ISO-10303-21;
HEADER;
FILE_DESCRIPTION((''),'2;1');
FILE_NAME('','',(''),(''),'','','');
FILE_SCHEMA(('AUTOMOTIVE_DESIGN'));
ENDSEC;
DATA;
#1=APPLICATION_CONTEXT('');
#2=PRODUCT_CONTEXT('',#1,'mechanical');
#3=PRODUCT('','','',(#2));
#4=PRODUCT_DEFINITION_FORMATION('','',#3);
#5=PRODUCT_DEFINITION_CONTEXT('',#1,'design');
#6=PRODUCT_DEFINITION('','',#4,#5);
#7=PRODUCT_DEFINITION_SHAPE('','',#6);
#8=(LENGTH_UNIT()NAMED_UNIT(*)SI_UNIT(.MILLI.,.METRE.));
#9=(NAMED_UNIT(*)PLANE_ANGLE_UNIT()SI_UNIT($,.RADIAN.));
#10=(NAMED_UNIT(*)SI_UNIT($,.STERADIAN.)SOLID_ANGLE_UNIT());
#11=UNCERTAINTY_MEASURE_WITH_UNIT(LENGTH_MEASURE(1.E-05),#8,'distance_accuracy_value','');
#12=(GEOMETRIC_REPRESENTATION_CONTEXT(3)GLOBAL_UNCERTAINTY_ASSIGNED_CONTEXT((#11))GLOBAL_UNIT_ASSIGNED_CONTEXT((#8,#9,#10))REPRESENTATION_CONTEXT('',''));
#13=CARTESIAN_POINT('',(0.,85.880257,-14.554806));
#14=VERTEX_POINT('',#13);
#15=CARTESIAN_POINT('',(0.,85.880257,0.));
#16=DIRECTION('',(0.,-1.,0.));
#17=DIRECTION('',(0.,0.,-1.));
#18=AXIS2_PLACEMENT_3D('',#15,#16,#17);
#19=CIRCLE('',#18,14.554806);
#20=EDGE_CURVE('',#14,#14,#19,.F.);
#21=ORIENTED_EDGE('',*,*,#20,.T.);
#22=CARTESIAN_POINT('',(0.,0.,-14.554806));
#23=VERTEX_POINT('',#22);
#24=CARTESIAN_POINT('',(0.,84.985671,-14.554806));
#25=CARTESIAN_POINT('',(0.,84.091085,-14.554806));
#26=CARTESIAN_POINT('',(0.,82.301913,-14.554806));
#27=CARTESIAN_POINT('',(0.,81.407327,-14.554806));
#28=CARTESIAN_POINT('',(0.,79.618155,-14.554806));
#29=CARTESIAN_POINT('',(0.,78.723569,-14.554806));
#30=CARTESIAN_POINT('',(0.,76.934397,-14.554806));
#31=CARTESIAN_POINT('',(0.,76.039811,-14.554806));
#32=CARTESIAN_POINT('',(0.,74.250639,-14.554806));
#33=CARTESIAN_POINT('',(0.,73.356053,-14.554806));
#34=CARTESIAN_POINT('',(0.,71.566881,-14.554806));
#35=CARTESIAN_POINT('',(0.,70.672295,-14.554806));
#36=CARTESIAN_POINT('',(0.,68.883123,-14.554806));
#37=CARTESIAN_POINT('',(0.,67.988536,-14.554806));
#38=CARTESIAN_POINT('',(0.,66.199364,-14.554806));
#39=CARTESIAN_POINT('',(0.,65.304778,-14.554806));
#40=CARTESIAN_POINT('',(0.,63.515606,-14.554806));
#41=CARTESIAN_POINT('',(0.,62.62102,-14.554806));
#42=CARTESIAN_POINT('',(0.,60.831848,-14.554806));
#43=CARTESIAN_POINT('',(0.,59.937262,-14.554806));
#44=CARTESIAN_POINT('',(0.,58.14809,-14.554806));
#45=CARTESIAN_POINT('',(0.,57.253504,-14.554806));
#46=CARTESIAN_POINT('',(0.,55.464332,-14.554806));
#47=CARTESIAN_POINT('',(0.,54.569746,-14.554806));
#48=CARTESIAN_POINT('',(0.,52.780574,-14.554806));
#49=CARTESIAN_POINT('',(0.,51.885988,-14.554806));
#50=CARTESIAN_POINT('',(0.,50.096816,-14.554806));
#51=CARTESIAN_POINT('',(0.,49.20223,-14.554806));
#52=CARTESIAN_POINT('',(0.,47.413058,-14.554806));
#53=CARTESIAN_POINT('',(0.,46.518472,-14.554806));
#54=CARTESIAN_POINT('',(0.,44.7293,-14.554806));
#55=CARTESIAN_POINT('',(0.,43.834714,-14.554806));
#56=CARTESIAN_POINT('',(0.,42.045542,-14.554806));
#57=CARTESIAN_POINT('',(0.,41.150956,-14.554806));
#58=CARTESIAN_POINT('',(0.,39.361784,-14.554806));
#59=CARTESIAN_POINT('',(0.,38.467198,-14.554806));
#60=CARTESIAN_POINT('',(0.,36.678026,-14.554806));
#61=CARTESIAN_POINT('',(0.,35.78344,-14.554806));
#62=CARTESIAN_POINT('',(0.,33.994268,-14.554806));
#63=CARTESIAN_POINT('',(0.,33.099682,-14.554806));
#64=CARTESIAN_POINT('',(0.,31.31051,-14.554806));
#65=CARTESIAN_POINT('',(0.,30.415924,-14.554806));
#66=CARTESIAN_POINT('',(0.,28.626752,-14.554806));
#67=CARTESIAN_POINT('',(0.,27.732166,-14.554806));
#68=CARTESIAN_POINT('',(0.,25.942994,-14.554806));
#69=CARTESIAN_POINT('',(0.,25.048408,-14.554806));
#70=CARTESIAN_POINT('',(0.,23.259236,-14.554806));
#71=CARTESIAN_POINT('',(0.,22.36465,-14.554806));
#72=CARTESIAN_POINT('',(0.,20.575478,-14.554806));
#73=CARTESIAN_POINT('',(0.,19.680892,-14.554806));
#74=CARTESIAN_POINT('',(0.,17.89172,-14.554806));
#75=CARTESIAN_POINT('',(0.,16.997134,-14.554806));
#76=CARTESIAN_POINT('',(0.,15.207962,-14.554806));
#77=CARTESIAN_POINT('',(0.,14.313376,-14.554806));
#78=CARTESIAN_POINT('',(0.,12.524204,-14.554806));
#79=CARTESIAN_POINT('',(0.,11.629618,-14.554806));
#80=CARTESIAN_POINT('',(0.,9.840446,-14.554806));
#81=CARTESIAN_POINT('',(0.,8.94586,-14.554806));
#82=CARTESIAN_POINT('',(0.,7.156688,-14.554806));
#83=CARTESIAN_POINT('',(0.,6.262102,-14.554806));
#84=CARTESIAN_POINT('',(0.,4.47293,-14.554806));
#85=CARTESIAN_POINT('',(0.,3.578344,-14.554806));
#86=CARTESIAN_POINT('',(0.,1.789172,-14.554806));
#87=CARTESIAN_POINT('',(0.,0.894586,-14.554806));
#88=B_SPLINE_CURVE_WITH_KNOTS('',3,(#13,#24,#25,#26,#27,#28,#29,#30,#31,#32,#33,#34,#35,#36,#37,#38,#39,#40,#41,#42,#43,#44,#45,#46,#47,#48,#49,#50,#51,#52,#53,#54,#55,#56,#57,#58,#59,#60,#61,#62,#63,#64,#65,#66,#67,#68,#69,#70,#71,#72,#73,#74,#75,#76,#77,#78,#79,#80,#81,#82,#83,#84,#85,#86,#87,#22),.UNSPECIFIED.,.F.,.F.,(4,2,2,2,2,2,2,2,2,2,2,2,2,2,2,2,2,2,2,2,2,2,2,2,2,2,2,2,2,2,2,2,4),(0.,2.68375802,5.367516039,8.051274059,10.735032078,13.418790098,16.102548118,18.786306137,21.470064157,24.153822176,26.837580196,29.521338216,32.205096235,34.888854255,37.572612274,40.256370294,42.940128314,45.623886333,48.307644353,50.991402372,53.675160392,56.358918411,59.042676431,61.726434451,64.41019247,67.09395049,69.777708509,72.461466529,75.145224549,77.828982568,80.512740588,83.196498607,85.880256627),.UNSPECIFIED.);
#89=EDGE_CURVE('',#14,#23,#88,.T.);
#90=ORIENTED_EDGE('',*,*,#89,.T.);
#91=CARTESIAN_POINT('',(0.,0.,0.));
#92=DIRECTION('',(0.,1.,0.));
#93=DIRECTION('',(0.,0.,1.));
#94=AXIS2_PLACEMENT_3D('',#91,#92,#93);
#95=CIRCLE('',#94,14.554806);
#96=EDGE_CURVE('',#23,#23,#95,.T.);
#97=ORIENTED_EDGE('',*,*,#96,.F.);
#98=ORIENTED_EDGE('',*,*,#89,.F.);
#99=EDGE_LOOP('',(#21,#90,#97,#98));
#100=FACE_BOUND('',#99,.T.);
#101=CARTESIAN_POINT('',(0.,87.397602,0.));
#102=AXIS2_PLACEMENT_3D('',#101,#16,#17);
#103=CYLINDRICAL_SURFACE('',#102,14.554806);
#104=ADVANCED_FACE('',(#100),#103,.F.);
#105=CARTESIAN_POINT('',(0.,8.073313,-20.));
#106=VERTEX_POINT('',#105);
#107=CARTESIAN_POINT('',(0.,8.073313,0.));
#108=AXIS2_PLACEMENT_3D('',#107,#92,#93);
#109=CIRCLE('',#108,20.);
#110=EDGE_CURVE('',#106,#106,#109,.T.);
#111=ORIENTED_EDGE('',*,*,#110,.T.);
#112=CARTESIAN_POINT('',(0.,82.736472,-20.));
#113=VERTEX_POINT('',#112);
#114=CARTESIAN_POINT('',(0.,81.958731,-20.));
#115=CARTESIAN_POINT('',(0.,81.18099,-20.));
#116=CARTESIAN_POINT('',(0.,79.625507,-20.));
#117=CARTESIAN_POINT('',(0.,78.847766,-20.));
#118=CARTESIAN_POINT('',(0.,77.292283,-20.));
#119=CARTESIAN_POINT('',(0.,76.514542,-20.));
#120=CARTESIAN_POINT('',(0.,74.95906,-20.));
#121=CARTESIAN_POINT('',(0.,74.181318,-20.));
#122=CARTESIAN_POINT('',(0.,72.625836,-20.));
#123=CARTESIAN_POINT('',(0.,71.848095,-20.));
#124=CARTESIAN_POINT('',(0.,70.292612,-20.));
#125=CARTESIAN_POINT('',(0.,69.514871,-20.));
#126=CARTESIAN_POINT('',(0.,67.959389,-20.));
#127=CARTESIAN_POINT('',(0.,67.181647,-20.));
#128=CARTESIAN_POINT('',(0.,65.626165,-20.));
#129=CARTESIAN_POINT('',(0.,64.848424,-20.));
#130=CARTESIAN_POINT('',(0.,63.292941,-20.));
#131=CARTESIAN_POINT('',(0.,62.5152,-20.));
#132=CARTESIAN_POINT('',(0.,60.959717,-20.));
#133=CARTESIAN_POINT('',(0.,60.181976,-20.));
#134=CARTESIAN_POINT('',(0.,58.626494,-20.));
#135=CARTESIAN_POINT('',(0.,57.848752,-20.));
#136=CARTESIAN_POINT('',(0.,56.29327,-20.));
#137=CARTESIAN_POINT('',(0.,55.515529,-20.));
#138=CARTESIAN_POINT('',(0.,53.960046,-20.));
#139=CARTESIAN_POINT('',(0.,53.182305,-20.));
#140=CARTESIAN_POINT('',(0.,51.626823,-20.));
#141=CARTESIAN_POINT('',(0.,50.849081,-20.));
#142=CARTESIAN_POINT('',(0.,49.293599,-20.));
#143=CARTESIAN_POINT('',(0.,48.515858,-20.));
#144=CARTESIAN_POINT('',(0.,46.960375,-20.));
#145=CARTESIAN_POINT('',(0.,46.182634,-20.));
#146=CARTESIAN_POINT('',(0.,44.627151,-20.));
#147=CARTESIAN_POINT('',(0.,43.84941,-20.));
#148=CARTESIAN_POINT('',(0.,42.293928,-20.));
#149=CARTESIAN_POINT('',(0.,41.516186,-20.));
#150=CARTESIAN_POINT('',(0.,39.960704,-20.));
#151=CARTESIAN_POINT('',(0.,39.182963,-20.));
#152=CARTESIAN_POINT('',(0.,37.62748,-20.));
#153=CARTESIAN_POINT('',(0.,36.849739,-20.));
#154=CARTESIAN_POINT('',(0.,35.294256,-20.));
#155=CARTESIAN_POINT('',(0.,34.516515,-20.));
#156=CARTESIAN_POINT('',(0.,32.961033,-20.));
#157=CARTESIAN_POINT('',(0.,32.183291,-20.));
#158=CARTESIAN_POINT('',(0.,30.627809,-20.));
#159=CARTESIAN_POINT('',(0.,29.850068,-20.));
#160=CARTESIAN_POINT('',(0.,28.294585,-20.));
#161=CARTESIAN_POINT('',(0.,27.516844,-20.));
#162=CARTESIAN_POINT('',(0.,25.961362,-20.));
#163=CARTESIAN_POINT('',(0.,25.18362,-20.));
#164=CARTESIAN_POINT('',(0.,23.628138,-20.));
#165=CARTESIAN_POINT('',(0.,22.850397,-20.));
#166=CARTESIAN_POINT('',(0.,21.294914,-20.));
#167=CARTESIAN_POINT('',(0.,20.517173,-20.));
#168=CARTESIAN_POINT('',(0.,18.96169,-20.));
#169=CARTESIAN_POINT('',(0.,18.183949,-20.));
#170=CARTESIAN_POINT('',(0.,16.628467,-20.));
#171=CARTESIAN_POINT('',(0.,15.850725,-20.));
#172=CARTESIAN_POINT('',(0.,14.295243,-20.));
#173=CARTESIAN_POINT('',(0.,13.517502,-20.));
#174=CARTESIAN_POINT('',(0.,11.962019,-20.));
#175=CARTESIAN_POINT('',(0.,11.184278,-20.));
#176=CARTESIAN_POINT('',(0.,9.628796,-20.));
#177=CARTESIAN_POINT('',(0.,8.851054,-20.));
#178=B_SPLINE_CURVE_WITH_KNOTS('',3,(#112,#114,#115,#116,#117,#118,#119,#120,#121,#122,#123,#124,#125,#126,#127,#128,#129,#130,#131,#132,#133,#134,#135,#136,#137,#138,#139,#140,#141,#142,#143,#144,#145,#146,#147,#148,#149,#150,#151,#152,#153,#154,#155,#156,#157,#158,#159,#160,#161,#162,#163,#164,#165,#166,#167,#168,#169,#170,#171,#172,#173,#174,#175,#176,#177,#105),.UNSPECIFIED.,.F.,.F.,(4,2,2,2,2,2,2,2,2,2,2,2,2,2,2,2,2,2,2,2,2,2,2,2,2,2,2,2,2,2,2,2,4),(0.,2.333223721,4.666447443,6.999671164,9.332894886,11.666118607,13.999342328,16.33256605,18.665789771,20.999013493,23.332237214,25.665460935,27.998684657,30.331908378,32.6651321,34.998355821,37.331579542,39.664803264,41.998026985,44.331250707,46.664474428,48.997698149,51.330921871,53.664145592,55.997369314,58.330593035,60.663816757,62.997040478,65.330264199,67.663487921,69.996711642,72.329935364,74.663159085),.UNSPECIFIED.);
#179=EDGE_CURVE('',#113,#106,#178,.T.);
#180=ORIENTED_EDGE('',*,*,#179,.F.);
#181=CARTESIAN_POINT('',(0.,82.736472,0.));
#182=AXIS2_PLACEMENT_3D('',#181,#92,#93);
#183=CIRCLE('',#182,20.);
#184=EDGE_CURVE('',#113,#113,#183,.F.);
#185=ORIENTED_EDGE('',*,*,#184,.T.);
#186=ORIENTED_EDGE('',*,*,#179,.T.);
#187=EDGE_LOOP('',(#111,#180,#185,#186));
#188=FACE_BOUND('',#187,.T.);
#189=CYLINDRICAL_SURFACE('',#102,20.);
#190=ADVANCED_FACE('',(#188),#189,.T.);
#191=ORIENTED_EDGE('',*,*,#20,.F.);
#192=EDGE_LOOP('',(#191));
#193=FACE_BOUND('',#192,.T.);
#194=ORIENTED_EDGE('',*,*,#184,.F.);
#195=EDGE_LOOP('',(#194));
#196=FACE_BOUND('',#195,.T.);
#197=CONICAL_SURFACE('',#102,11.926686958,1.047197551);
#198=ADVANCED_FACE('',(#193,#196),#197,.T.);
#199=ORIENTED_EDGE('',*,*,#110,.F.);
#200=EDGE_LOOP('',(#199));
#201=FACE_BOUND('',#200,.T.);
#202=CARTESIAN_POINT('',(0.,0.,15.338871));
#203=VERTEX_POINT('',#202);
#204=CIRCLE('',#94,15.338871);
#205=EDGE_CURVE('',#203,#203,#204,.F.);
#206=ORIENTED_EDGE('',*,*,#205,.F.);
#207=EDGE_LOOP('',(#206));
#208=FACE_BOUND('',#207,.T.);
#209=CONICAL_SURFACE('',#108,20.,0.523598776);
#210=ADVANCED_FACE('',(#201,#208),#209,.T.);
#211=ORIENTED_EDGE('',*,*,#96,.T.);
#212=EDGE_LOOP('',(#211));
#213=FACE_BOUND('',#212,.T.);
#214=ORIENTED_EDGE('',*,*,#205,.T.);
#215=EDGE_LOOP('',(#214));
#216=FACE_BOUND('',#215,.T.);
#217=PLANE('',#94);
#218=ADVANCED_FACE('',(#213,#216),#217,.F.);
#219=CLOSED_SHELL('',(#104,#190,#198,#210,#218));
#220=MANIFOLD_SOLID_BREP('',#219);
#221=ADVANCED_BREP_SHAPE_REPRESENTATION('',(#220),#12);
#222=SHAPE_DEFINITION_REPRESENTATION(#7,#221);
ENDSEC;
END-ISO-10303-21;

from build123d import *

# Parameters (mm, degrees)
SKETCH1_R           = 20
BOSS_EXTRUDE1_DEPTH = 87.397602
SKETCH2_R           = 14.554805518
CUT_EXTRUDE1_DEPTH  = 92.860442168
CHAMFER1_SIZE       = 4.661129
CHAMFER1_SIZE_2     = 8.073313


with BuildPart() as part:
    # Sketch1 → Boss-Extrude1 (new body)
    with BuildSketch(Plane(origin=(0, 0, 0), x_dir=(1, 0, 0), z_dir=(0, 1, 0))):
        with Locations(Location((0, 0, 0), (0, 0, 90))):
            Circle(SKETCH1_R)
    extrude(amount=BOSS_EXTRUDE1_DEPTH)

    # Sketch2 → Cut-Extrude1 (cut, through all)
    with BuildSketch(Plane(origin=(0, 0, 0), x_dir=(1, 0, 0), z_dir=(0, 1, 0))):
        with Locations(Location((0, 0, 0), (0, 0, 90))):
            Circle(SKETCH2_R)
    extrude(amount=CUT_EXTRUDE1_DEPTH, mode=Mode.SUBTRACT)

    # Chamfer1
    # the kernel refuses this chamfer: 8.073313, 4.661129 mm, written as the material it takes off along each edge
    with BuildSketch(Plane(origin=(0, 87.397602, 0), x_dir=(0, 0, -1), z_dir=(1, 0, 0))) as chamfer1_piece_1:
        Polygon((20, -CHAMFER1_SIZE), (20 - CHAMFER1_SIZE_2, 0), (20, 0), align=None)
    revolve(axis=Axis((0, 87.397602, 0), (0, 1, 0)), mode=Mode.SUBTRACT)
    with BuildSketch(Plane(origin=(0, 0, 0), x_dir=(0, 0, -1), z_dir=(1, 0, 0))) as chamfer1_piece_2:
        Polygon((20, CHAMFER1_SIZE_2), (20 - CHAMFER1_SIZE, 0), (20, 0), align=None)
    revolve(axis=Axis((0, 0, 0), (0, 1, 0)), mode=Mode.SUBTRACT)


solid = part.part
